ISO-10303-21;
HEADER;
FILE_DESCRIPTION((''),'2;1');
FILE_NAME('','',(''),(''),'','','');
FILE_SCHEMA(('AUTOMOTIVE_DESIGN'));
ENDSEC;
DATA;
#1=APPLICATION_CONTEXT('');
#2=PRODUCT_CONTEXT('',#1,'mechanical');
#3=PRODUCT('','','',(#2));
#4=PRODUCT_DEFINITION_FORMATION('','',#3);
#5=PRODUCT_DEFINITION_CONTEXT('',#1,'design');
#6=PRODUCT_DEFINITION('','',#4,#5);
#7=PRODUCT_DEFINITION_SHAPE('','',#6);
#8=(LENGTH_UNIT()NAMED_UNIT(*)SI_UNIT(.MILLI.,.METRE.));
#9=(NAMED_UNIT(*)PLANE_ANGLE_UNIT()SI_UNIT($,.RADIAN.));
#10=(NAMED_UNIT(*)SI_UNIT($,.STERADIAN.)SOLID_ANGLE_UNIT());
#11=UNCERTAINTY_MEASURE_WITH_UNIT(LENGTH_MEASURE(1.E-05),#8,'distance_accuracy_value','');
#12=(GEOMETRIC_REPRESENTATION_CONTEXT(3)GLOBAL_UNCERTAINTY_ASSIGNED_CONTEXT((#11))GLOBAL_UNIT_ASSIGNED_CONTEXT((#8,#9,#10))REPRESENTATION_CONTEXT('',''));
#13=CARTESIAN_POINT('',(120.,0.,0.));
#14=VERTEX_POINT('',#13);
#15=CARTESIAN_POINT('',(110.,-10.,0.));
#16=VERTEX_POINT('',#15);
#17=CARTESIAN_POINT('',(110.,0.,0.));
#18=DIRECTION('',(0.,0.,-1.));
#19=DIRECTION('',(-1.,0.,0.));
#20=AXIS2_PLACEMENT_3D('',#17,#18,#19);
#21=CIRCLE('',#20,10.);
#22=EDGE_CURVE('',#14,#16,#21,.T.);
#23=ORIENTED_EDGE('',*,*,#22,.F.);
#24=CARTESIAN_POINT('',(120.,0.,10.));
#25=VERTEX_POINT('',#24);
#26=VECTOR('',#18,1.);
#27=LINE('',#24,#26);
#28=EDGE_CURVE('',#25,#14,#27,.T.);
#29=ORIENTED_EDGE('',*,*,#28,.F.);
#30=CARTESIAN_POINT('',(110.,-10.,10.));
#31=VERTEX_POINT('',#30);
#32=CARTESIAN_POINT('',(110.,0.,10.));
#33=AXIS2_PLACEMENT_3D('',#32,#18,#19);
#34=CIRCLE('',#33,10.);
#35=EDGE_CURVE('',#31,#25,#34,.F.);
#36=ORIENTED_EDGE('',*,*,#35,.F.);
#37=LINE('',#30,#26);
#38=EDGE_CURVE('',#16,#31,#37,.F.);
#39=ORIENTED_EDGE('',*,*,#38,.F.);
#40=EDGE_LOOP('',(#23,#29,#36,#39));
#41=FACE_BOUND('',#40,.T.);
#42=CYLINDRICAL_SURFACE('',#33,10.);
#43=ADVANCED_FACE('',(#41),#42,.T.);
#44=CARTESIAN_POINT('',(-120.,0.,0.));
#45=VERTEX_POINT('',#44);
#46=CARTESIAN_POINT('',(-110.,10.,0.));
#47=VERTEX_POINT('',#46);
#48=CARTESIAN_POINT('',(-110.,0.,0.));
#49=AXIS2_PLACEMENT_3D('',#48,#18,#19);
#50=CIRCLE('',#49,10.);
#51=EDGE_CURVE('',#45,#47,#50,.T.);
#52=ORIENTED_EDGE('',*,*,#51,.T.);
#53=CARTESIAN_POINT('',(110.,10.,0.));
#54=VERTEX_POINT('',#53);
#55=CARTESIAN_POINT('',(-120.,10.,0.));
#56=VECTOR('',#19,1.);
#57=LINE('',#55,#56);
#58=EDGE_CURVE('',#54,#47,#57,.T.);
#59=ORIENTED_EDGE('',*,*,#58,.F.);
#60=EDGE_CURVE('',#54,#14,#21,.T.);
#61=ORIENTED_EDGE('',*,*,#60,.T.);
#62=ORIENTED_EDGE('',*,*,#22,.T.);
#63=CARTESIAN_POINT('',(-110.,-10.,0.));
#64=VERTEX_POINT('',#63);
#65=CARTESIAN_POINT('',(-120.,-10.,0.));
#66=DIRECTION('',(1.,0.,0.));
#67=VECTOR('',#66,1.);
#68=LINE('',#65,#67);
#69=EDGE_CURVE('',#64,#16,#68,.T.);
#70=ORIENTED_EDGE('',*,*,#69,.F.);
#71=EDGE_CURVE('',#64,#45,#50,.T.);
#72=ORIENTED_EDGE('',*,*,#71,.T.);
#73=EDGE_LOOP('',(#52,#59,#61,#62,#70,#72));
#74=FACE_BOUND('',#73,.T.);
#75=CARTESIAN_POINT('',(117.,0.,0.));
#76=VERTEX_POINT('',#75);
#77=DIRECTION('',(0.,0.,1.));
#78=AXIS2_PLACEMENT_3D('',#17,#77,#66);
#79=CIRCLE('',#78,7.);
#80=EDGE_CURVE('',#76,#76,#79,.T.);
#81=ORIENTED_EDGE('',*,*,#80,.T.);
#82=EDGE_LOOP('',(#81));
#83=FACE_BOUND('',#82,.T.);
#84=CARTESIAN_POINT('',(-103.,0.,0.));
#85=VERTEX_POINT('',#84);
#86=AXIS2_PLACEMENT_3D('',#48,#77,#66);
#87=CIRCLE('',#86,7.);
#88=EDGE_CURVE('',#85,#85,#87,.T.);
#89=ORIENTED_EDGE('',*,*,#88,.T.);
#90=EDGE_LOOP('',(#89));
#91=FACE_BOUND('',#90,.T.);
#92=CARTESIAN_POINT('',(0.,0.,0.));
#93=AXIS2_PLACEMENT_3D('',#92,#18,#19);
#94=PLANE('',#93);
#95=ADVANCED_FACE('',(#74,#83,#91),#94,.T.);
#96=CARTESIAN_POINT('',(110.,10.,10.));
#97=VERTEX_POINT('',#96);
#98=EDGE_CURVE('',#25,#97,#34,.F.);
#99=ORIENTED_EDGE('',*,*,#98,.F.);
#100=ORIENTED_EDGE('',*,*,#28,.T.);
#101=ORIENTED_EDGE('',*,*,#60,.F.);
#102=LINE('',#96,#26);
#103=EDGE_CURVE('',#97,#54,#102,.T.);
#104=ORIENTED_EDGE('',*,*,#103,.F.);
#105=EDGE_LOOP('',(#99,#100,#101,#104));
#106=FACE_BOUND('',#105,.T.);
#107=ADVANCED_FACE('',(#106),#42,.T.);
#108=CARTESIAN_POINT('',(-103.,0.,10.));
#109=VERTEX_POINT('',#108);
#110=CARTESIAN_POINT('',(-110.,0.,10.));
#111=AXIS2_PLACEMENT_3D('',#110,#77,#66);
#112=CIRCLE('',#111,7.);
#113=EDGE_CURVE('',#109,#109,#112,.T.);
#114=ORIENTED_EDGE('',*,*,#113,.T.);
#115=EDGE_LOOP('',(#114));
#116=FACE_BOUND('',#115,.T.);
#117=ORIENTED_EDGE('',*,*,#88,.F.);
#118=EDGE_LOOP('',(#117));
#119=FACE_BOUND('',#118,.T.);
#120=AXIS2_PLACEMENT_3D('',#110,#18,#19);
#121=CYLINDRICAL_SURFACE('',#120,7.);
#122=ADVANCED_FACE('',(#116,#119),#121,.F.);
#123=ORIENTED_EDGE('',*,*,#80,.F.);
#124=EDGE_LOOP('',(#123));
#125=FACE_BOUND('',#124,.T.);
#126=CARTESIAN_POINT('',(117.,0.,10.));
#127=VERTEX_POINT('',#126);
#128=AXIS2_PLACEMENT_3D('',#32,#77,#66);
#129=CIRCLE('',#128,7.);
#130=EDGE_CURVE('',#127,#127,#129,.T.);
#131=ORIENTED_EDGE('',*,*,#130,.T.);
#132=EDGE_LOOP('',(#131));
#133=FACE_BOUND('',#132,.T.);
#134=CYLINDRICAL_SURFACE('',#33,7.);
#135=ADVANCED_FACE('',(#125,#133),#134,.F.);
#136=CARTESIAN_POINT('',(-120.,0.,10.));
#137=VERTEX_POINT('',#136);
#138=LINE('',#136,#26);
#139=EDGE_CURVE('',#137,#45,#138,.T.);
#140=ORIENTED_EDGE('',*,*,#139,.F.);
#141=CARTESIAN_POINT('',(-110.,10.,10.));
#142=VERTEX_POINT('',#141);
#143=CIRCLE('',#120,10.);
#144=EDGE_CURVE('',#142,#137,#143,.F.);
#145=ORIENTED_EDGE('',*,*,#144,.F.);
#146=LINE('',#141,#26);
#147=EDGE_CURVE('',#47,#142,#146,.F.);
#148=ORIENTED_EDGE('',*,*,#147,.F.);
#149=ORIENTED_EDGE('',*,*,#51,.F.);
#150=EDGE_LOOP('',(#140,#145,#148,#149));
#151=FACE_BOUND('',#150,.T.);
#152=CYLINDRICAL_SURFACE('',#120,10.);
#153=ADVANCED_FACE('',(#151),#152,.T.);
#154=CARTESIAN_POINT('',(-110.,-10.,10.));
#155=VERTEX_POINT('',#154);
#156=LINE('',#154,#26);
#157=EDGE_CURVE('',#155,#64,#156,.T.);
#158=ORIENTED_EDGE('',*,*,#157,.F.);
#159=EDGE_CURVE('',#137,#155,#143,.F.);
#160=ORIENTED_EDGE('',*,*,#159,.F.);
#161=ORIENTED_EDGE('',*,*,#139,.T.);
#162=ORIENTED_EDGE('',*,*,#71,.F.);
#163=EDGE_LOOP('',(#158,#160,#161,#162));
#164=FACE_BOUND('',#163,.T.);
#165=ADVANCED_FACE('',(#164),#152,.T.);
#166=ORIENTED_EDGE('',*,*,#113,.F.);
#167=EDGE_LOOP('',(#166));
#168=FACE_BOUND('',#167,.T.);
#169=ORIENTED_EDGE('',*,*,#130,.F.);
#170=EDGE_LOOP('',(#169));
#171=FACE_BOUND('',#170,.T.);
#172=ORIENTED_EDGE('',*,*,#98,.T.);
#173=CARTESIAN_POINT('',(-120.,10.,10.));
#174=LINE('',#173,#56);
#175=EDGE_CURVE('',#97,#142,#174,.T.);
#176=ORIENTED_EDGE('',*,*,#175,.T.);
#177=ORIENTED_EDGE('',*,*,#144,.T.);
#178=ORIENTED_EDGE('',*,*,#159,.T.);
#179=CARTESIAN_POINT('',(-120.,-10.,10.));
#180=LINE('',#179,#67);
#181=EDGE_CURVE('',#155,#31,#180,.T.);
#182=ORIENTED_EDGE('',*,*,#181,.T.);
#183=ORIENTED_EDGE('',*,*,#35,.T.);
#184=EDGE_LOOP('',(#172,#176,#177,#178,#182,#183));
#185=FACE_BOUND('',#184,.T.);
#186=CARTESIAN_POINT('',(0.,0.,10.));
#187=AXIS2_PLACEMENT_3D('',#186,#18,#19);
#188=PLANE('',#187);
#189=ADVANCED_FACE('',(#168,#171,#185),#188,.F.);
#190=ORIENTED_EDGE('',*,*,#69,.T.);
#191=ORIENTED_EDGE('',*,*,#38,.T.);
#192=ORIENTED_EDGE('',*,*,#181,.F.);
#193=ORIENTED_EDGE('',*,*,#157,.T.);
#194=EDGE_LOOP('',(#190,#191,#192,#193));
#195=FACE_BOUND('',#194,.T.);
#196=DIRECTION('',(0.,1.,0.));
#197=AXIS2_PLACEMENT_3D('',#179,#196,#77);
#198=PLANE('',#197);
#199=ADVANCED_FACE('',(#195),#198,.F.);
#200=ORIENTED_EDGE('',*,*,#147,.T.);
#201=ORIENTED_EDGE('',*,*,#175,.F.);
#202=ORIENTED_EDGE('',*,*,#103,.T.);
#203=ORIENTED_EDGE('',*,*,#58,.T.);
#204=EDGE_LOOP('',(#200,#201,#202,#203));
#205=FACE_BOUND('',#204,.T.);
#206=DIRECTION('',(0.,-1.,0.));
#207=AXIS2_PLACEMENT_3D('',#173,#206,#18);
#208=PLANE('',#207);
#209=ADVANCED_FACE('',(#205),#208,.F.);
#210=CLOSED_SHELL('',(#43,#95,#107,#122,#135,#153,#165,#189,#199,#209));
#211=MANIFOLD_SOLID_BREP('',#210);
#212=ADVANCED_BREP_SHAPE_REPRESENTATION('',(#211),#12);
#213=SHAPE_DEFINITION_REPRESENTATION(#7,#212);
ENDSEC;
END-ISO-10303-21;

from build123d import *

# Parameters (mm, degrees)
SKETCH_1_W      = 240
SKETCH_1_H      = 20
SKETCH_1_R      = 7
EXTRUDE_1_DEPTH = 10
FILLET_1_R      = 10


with BuildPart() as part:
    # 草图1 → 凸台-拉伸1 (new body)
    with BuildSketch(Plane.XY):
        Rectangle(SKETCH_1_W, SKETCH_1_H)
        with Locations((-110, 0)):
            Circle(SKETCH_1_R, mode=Mode.SUBTRACT)
        with Locations((110, 0)):
            Circle(SKETCH_1_R, mode=Mode.SUBTRACT)
    extrude(amount=EXTRUDE_1_DEPTH)

    # 圆角1
    fillet_1_edges = [part.edges().sort_by_distance(p)[0] for p in [
        (120, 10, 5),
        (120, -10, 5),
        (-120, -10, 5),
        (-120, 10, 5),
    ]]
    fillet(fillet_1_edges, radius=FILLET_1_R - 0.0001)  # a hair under: the kernel refuses the full size


solid = part.part
